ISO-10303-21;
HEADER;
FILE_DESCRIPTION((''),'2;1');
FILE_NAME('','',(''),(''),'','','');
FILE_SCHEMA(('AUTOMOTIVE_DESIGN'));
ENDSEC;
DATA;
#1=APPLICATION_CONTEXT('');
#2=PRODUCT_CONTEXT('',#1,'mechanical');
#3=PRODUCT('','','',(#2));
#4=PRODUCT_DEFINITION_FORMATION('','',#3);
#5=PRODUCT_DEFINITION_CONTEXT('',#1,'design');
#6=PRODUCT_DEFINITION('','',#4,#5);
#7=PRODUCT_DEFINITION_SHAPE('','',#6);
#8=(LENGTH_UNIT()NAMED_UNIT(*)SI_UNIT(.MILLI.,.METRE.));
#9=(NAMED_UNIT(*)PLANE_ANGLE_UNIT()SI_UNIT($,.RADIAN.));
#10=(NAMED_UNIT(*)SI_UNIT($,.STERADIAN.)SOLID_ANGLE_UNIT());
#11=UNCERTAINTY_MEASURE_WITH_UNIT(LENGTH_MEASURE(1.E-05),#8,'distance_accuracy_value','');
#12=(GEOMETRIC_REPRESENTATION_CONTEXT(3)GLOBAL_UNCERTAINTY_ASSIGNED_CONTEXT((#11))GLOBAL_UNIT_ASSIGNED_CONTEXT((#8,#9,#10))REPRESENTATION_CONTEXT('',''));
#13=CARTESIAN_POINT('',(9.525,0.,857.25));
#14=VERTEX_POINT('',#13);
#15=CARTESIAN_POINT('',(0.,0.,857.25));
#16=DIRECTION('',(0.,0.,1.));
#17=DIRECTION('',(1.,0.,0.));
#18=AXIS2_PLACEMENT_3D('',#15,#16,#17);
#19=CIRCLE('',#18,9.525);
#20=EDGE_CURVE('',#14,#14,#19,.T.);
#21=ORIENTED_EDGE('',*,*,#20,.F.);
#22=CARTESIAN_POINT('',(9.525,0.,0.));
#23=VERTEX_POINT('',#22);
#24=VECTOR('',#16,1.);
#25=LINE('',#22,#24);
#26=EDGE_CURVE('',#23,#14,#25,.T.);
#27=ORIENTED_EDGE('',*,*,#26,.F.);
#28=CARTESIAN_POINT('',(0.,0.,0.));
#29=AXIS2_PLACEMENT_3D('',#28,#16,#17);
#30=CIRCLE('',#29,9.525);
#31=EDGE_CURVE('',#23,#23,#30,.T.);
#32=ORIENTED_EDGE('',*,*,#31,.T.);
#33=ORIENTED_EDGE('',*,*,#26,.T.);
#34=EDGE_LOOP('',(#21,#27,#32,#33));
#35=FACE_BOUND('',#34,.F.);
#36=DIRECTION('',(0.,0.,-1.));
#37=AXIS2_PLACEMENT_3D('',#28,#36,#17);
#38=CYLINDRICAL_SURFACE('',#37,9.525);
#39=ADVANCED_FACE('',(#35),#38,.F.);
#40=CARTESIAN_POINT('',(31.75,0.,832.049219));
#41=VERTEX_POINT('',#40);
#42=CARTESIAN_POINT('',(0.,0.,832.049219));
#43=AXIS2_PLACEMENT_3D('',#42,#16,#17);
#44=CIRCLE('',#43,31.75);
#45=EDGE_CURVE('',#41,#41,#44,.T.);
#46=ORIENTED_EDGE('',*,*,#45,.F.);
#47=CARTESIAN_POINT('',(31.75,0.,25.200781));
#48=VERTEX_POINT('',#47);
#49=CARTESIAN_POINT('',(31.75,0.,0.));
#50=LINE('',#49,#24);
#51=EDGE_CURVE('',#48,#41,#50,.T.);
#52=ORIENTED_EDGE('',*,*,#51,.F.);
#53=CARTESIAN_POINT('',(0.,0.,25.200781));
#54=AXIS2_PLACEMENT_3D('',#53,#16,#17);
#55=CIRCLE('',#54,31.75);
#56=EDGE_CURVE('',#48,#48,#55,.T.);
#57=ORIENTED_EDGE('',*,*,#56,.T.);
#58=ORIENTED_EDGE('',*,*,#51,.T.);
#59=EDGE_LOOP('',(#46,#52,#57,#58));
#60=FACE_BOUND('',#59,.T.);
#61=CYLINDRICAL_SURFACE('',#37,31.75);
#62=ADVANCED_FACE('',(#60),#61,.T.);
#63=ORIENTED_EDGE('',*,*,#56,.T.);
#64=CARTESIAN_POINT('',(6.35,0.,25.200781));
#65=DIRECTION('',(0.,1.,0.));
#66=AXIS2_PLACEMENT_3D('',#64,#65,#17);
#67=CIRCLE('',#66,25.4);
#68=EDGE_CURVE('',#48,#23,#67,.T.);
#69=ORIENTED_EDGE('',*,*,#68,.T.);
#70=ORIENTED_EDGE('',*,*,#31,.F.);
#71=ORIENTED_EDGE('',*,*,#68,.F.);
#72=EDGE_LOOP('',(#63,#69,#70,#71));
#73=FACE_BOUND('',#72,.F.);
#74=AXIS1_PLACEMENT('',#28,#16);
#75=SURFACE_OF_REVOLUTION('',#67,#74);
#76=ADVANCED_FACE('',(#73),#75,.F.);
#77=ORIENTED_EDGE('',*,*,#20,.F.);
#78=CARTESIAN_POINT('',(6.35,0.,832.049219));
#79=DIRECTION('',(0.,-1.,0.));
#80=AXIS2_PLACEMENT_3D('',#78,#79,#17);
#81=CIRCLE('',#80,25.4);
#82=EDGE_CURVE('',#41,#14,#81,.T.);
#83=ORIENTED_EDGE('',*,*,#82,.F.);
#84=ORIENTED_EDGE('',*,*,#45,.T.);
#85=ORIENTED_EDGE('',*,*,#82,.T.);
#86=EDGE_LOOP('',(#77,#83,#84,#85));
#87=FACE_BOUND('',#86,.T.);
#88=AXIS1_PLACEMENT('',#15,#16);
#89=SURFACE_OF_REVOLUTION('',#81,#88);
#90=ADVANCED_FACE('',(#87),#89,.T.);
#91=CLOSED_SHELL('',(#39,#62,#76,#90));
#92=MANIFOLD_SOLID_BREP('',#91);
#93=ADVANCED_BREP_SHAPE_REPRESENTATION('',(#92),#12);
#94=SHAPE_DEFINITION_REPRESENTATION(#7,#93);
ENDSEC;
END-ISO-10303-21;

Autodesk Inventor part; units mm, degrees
ref_plane "YZ Plane" through (0, 0, 0) normal (1, 0, 0) x (0, 1, 0)
ref_plane "XZ Plane" through (0, 0, 0) normal (0, 1, 0) x (-1, 0, 0)
ref_plane "XY Plane" through (0, 0, 0) normal (0, 0, 1) x (1, 0, 0)
sketch "Sketch1" plane through (0, 0, 0) normal (0, 0, 1) x (1, 0, 0)
  circle A0 centre (0, 0) radius 31.75
  circle A1 centre (0, 0) radius 9.525
  dimension "d0" = 63.5
  dimension "d1" = 19.05
extrude "Extrusion1" add sketch "Sketch1" along normal blind 857.25
fillet "Fillet1" radius 25.4 2 edges at (-31.75, 0, 857.25) (-31.75, 0, 0)
properties part number "Pool Noodle Part2 (26x28 robot)"
